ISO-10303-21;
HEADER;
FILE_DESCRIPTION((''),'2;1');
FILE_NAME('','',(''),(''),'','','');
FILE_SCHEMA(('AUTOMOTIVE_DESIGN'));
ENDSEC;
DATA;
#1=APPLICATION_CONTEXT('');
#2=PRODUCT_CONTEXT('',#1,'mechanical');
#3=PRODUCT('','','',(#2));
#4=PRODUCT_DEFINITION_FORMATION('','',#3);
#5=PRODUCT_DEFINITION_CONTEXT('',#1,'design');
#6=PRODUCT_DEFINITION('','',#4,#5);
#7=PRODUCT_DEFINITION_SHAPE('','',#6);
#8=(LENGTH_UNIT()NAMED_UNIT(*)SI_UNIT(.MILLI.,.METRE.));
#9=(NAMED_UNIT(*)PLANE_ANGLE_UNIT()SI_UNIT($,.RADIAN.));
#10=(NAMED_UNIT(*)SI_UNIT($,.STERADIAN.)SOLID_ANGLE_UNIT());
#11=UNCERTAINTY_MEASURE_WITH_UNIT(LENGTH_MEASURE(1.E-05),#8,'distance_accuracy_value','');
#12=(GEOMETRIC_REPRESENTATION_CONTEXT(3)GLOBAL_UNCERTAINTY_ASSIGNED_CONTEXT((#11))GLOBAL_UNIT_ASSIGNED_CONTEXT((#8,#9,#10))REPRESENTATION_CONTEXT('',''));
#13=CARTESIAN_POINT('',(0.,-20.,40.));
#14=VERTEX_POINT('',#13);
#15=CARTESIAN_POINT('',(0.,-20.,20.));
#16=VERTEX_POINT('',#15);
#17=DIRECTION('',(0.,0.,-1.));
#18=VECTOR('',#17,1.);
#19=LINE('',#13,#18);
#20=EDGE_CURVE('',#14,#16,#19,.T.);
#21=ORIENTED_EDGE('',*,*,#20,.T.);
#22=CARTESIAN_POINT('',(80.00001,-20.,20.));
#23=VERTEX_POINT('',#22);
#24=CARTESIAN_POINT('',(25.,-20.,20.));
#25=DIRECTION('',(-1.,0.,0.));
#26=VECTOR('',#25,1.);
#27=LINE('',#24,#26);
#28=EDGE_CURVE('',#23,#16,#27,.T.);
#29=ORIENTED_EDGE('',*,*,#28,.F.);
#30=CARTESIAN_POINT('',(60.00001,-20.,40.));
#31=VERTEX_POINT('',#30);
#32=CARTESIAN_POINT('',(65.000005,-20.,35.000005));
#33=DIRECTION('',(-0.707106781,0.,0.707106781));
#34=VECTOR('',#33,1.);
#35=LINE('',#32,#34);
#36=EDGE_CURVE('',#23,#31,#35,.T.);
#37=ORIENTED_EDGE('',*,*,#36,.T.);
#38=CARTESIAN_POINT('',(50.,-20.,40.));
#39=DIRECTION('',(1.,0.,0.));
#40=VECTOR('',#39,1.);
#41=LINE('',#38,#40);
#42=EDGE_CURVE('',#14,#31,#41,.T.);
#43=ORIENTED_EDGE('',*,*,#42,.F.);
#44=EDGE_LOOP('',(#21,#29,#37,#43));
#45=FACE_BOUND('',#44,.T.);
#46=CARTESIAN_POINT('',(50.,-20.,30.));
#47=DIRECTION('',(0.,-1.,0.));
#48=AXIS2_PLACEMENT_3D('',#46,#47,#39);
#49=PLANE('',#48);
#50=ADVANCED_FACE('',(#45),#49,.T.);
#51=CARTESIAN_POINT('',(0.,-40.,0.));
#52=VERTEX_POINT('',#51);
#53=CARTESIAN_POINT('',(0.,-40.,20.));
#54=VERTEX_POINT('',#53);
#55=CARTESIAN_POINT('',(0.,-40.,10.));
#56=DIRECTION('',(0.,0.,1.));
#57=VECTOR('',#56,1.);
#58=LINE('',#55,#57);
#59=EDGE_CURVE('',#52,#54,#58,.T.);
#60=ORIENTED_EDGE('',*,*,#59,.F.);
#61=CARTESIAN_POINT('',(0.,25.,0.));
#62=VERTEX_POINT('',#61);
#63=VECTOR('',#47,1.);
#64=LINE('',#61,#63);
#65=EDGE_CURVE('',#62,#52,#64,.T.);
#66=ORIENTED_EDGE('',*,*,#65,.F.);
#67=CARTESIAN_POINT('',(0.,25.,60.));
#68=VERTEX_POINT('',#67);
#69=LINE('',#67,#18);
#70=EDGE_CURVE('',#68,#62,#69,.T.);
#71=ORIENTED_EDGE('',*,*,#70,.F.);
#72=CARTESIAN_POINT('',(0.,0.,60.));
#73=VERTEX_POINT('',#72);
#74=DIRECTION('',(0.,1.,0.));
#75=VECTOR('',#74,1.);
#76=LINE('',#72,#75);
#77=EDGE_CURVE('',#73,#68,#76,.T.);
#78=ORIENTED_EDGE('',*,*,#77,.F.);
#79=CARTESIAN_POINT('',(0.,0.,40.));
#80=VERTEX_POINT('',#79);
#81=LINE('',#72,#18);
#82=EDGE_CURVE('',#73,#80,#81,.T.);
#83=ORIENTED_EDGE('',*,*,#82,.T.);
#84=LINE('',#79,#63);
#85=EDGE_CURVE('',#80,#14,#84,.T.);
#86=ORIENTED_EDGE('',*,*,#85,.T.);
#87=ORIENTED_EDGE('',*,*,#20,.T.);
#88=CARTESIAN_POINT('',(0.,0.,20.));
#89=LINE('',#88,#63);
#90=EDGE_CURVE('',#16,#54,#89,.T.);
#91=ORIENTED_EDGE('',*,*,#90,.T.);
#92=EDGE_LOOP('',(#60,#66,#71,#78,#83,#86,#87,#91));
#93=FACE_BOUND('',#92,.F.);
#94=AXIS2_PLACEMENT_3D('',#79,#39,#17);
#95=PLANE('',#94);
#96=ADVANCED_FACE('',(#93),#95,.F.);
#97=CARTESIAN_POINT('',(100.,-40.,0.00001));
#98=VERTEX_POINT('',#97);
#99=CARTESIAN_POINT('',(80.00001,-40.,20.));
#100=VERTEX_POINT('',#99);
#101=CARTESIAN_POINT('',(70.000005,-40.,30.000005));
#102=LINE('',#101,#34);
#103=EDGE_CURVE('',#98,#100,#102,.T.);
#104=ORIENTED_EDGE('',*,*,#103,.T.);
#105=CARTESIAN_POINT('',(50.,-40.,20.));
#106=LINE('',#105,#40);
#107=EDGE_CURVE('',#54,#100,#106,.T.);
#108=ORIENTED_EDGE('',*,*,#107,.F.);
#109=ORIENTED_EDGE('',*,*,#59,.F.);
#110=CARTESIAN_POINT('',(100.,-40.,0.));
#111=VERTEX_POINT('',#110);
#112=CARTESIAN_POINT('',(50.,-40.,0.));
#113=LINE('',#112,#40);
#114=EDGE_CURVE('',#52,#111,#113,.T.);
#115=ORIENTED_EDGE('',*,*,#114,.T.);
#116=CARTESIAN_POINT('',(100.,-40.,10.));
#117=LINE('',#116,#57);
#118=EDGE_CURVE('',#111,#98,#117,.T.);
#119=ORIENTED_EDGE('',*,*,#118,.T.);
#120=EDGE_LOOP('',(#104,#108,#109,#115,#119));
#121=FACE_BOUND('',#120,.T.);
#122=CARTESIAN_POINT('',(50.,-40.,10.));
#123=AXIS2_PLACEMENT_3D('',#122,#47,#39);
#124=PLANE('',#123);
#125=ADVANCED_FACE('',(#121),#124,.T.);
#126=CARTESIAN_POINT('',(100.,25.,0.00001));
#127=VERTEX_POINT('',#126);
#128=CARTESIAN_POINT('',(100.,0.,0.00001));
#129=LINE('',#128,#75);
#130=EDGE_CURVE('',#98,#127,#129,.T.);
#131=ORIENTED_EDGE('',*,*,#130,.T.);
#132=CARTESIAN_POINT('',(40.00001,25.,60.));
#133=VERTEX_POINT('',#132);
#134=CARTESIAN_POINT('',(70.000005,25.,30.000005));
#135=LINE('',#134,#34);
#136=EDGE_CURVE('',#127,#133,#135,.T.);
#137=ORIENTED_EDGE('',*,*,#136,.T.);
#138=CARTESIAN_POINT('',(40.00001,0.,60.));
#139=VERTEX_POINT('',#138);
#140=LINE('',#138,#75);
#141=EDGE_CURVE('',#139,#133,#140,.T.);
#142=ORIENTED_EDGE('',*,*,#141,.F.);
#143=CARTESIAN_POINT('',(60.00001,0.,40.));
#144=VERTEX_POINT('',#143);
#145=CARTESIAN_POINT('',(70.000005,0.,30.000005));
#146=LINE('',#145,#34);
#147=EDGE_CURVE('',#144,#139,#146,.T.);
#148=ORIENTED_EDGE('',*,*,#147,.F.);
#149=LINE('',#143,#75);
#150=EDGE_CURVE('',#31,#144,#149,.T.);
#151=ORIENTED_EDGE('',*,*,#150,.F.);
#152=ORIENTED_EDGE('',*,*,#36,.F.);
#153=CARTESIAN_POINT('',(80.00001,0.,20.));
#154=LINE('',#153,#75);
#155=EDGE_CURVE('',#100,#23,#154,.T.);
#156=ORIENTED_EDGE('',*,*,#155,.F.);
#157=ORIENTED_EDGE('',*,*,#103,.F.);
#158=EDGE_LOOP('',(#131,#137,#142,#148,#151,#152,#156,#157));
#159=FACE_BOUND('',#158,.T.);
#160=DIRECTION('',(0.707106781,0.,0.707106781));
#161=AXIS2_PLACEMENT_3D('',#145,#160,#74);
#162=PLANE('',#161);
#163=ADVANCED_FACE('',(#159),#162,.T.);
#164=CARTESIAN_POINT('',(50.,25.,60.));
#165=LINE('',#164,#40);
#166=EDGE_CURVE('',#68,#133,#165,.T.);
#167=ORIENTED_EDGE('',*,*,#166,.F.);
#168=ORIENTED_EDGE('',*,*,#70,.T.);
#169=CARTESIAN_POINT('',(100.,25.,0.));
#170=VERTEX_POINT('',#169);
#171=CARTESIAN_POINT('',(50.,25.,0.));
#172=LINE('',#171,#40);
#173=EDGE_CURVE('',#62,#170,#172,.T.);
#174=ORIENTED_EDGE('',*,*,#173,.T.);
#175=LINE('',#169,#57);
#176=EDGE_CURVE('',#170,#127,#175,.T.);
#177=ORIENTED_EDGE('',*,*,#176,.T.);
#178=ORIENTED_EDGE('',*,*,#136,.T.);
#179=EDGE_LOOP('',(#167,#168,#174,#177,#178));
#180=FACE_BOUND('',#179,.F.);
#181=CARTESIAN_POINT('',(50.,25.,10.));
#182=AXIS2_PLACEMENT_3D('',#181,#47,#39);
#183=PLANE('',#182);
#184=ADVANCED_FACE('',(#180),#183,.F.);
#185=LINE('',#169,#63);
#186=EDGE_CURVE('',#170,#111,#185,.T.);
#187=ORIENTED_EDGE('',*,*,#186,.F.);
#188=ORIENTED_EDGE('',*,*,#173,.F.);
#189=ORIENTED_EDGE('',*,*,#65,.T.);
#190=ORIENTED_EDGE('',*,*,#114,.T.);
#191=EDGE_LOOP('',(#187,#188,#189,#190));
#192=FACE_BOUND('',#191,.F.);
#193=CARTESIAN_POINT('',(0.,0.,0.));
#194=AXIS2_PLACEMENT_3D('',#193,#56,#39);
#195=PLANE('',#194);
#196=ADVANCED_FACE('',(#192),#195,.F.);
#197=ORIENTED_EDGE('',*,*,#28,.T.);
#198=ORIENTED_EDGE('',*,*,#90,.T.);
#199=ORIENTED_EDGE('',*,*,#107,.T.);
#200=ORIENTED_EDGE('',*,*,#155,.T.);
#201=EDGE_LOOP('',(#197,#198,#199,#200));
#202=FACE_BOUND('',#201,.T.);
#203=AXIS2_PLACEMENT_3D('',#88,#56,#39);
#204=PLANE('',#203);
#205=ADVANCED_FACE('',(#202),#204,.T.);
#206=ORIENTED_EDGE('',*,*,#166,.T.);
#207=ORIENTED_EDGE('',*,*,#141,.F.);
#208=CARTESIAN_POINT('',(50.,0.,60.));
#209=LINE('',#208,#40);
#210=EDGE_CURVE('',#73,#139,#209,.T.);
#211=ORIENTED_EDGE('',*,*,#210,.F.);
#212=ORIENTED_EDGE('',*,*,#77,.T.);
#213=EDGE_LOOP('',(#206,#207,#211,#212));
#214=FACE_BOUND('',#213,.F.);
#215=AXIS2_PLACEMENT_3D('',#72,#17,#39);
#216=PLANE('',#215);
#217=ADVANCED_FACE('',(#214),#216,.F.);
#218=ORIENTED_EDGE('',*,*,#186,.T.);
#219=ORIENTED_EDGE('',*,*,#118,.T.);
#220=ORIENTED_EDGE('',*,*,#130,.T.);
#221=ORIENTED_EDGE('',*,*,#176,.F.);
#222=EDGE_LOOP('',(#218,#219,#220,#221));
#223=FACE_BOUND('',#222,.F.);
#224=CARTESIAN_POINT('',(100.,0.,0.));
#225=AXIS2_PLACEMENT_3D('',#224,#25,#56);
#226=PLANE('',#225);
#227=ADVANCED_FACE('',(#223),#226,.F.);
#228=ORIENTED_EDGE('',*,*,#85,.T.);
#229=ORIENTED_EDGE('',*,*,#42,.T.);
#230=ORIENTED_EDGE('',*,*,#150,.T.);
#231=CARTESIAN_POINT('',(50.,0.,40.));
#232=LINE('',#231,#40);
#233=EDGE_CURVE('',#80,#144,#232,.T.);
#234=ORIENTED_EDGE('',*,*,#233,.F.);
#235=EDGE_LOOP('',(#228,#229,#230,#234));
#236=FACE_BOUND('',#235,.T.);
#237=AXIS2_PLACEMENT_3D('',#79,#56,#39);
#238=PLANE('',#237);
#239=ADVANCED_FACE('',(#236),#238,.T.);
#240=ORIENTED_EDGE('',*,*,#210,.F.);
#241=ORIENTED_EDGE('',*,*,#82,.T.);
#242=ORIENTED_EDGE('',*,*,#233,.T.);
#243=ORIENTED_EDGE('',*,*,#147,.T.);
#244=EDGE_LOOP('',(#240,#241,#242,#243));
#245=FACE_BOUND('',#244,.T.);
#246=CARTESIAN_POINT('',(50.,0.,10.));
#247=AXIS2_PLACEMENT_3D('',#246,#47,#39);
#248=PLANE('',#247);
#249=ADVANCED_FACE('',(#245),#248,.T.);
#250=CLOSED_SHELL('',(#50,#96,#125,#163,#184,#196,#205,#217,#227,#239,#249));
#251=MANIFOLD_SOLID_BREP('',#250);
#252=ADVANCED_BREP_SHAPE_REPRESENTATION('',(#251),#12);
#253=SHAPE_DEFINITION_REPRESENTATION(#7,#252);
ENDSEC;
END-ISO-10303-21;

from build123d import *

# Parameters (mm, degrees)
F0_W     = 100
F0_H     = 20
F1_DEPTH = 25
F2_DEPTH = 20
F3_DEPTH = 40
F4_SIZE  = 59.99999


# Not quite as in the source:
# - a fillet or chamfer is up to 0.001 mm smaller than in the source, because OpenCascade refuses the exact size


with BuildPart() as f1:
    # F0 (on Front) → F1 (new body)
    with BuildSketch(Plane.XZ):
        with Locations((50, 10)):
            Rectangle(F0_W, F0_H)
        with Locations((50, 30)):
            Rectangle(F0_W, F0_H)
        with Locations((50, 50)):
            Rectangle(F0_W, F0_H)
    extrude(amount=-F1_DEPTH)

    # F0 (on Front) → F2 (join)
    with BuildSketch(Plane.XZ):
        with Locations((50, 30)):
            Rectangle(F0_W, F0_H)
        with Locations((50, 10)):
            Rectangle(F0_W, F0_H)
    extrude(amount=F2_DEPTH)

    # F0 (on Front) → F3 (join)
    with BuildSketch(Plane.XZ):
        with Locations((50, 10)):
            Rectangle(F0_W, F0_H)
    extrude(amount=F3_DEPTH)

    # F4 (size 60 in the source; OpenCascade refuses exactly that, so slightly less here)
    f4_edges = [f1.edges().sort_by_distance(p)[0] for p in [
        (100, 12.5, 60),
    ]]
    chamfer(f4_edges, length=F4_SIZE)


solid = f1.part
